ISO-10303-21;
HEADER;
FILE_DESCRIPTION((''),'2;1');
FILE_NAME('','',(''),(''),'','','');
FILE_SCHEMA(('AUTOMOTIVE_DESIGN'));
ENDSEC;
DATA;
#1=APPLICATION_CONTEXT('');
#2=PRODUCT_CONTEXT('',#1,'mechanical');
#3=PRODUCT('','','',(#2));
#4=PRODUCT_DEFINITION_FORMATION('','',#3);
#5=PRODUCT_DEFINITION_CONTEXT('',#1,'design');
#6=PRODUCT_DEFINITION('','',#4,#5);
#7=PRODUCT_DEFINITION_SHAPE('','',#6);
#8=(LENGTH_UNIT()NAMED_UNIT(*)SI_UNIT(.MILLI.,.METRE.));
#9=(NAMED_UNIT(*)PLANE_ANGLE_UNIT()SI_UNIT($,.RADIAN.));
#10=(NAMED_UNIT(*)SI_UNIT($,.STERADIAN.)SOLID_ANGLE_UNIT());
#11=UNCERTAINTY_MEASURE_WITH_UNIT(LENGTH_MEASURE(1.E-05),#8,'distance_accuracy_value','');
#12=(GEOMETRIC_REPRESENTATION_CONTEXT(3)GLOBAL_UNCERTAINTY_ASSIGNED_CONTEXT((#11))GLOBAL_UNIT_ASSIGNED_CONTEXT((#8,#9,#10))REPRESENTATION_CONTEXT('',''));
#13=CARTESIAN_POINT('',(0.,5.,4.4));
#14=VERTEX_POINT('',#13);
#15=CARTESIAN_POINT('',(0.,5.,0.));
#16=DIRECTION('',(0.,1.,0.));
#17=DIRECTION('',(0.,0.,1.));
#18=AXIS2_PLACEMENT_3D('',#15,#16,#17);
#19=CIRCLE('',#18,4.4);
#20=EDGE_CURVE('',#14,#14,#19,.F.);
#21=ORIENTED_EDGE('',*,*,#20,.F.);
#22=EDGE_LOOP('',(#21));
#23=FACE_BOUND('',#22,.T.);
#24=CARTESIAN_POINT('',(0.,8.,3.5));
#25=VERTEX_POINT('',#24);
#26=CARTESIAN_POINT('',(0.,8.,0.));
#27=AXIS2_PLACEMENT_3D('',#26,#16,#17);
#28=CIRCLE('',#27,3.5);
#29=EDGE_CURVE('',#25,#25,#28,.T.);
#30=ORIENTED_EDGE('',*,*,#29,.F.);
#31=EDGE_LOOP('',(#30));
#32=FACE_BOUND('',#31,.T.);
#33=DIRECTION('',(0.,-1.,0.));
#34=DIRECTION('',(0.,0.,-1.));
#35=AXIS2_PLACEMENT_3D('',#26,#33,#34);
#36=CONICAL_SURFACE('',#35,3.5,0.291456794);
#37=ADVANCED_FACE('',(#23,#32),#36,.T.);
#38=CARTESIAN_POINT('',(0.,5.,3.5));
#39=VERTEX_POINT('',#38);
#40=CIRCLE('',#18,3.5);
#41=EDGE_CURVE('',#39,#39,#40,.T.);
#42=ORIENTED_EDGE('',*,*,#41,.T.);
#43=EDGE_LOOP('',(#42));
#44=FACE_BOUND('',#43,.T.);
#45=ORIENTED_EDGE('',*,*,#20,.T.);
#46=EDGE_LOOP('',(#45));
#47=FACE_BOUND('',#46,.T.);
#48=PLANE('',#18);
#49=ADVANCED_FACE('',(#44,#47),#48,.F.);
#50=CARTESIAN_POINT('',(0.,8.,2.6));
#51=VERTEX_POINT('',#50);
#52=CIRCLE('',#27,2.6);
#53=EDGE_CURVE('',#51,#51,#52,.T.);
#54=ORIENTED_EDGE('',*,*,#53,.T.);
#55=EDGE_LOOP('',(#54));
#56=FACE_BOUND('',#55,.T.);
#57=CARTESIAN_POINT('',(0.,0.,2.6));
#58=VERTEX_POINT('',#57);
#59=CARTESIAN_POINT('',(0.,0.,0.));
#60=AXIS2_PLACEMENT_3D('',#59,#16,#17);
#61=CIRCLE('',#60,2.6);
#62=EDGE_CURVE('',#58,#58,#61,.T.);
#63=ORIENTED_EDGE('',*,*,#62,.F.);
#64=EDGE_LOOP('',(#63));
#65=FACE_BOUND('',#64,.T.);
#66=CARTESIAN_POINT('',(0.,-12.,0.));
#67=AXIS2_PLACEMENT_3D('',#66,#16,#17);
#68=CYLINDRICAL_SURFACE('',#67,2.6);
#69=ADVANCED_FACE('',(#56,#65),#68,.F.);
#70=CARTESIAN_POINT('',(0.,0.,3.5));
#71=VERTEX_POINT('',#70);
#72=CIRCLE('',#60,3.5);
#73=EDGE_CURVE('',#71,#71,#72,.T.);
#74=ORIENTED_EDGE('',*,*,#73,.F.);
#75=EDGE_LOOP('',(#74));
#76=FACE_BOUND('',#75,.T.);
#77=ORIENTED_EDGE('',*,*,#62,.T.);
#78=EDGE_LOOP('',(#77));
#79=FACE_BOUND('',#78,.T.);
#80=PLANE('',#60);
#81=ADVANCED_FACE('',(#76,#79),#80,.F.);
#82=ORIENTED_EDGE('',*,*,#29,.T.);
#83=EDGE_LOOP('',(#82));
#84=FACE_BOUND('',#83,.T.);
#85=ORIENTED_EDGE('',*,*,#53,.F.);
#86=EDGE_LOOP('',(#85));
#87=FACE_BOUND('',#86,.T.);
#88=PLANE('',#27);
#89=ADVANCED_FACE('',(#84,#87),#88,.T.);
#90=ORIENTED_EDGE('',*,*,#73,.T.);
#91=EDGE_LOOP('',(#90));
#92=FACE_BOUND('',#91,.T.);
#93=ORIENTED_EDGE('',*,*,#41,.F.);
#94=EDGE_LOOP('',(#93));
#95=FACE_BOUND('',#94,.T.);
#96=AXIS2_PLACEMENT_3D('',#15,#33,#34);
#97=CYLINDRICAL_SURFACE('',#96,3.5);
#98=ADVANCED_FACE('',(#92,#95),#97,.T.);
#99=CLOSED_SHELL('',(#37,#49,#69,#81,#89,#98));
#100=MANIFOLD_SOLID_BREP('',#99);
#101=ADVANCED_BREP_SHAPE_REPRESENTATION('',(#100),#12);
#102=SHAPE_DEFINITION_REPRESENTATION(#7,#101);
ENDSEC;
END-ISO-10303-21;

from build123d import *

# Parameters (mm, degrees)
SKETCH1_R           = 3.5
BOSS_EXTRUDE1_DEPTH = 5
SKETCH2_R           = 5
BOSS_EXTRUDE2_DEPTH = 3
CHAMFER1_SIZE       = 5
CHAMFER1_SIZE_2     = 1.5
SKETCH3_R           = 2.6
CUT_EXTRUDE1_DEPTH  = 20


with BuildPart() as part:
    # Sketch1 → Boss-Extrude1 (new body)
    with BuildSketch(Plane(origin=(0, 0, 0), x_dir=(1, 0, 0), z_dir=(0, 1, 0))):
        with Locations(Location((0, 0, 0), (0, 0, 270))):
            Circle(SKETCH1_R)
    extrude(amount=BOSS_EXTRUDE1_DEPTH)

    # Sketch2 → Boss-Extrude2 (add)
    with BuildSketch(Plane(origin=(0, 5, 0), x_dir=(1, 0, 0), z_dir=(0, 1, 0))):
        with Locations(Location((0, 0, 0), (0, 0, 270))):
            Circle(SKETCH2_R)
    extrude(amount=BOSS_EXTRUDE2_DEPTH)

    # Chamfer1
    # the kernel refuses this chamfer: 5, 1.5 mm, written as the material it takes off along each edge
    with BuildSketch(Plane(origin=(0, 8, 0), x_dir=(0, 0, 1), z_dir=(-1, 0, 0))) as chamfer1_piece_1:
        Polygon((5, -CHAMFER1_SIZE), (5 - CHAMFER1_SIZE_2, 0), (5, 0), align=None)
    revolve(axis=Axis((0, 8, 0), (0, 1, 0)), mode=Mode.SUBTRACT)

    # Sketch3 → Cut-Extrude1 (cut)
    with BuildSketch(Plane(origin=(0, 8, 0), x_dir=(1, 0, 0), z_dir=(0, 1, 0))):
        with Locations(Location((0, 0, 0), (0, 0, 270))):
            Circle(SKETCH3_R)
    extrude(amount=-CUT_EXTRUDE1_DEPTH, mode=Mode.SUBTRACT)


solid = part.part
